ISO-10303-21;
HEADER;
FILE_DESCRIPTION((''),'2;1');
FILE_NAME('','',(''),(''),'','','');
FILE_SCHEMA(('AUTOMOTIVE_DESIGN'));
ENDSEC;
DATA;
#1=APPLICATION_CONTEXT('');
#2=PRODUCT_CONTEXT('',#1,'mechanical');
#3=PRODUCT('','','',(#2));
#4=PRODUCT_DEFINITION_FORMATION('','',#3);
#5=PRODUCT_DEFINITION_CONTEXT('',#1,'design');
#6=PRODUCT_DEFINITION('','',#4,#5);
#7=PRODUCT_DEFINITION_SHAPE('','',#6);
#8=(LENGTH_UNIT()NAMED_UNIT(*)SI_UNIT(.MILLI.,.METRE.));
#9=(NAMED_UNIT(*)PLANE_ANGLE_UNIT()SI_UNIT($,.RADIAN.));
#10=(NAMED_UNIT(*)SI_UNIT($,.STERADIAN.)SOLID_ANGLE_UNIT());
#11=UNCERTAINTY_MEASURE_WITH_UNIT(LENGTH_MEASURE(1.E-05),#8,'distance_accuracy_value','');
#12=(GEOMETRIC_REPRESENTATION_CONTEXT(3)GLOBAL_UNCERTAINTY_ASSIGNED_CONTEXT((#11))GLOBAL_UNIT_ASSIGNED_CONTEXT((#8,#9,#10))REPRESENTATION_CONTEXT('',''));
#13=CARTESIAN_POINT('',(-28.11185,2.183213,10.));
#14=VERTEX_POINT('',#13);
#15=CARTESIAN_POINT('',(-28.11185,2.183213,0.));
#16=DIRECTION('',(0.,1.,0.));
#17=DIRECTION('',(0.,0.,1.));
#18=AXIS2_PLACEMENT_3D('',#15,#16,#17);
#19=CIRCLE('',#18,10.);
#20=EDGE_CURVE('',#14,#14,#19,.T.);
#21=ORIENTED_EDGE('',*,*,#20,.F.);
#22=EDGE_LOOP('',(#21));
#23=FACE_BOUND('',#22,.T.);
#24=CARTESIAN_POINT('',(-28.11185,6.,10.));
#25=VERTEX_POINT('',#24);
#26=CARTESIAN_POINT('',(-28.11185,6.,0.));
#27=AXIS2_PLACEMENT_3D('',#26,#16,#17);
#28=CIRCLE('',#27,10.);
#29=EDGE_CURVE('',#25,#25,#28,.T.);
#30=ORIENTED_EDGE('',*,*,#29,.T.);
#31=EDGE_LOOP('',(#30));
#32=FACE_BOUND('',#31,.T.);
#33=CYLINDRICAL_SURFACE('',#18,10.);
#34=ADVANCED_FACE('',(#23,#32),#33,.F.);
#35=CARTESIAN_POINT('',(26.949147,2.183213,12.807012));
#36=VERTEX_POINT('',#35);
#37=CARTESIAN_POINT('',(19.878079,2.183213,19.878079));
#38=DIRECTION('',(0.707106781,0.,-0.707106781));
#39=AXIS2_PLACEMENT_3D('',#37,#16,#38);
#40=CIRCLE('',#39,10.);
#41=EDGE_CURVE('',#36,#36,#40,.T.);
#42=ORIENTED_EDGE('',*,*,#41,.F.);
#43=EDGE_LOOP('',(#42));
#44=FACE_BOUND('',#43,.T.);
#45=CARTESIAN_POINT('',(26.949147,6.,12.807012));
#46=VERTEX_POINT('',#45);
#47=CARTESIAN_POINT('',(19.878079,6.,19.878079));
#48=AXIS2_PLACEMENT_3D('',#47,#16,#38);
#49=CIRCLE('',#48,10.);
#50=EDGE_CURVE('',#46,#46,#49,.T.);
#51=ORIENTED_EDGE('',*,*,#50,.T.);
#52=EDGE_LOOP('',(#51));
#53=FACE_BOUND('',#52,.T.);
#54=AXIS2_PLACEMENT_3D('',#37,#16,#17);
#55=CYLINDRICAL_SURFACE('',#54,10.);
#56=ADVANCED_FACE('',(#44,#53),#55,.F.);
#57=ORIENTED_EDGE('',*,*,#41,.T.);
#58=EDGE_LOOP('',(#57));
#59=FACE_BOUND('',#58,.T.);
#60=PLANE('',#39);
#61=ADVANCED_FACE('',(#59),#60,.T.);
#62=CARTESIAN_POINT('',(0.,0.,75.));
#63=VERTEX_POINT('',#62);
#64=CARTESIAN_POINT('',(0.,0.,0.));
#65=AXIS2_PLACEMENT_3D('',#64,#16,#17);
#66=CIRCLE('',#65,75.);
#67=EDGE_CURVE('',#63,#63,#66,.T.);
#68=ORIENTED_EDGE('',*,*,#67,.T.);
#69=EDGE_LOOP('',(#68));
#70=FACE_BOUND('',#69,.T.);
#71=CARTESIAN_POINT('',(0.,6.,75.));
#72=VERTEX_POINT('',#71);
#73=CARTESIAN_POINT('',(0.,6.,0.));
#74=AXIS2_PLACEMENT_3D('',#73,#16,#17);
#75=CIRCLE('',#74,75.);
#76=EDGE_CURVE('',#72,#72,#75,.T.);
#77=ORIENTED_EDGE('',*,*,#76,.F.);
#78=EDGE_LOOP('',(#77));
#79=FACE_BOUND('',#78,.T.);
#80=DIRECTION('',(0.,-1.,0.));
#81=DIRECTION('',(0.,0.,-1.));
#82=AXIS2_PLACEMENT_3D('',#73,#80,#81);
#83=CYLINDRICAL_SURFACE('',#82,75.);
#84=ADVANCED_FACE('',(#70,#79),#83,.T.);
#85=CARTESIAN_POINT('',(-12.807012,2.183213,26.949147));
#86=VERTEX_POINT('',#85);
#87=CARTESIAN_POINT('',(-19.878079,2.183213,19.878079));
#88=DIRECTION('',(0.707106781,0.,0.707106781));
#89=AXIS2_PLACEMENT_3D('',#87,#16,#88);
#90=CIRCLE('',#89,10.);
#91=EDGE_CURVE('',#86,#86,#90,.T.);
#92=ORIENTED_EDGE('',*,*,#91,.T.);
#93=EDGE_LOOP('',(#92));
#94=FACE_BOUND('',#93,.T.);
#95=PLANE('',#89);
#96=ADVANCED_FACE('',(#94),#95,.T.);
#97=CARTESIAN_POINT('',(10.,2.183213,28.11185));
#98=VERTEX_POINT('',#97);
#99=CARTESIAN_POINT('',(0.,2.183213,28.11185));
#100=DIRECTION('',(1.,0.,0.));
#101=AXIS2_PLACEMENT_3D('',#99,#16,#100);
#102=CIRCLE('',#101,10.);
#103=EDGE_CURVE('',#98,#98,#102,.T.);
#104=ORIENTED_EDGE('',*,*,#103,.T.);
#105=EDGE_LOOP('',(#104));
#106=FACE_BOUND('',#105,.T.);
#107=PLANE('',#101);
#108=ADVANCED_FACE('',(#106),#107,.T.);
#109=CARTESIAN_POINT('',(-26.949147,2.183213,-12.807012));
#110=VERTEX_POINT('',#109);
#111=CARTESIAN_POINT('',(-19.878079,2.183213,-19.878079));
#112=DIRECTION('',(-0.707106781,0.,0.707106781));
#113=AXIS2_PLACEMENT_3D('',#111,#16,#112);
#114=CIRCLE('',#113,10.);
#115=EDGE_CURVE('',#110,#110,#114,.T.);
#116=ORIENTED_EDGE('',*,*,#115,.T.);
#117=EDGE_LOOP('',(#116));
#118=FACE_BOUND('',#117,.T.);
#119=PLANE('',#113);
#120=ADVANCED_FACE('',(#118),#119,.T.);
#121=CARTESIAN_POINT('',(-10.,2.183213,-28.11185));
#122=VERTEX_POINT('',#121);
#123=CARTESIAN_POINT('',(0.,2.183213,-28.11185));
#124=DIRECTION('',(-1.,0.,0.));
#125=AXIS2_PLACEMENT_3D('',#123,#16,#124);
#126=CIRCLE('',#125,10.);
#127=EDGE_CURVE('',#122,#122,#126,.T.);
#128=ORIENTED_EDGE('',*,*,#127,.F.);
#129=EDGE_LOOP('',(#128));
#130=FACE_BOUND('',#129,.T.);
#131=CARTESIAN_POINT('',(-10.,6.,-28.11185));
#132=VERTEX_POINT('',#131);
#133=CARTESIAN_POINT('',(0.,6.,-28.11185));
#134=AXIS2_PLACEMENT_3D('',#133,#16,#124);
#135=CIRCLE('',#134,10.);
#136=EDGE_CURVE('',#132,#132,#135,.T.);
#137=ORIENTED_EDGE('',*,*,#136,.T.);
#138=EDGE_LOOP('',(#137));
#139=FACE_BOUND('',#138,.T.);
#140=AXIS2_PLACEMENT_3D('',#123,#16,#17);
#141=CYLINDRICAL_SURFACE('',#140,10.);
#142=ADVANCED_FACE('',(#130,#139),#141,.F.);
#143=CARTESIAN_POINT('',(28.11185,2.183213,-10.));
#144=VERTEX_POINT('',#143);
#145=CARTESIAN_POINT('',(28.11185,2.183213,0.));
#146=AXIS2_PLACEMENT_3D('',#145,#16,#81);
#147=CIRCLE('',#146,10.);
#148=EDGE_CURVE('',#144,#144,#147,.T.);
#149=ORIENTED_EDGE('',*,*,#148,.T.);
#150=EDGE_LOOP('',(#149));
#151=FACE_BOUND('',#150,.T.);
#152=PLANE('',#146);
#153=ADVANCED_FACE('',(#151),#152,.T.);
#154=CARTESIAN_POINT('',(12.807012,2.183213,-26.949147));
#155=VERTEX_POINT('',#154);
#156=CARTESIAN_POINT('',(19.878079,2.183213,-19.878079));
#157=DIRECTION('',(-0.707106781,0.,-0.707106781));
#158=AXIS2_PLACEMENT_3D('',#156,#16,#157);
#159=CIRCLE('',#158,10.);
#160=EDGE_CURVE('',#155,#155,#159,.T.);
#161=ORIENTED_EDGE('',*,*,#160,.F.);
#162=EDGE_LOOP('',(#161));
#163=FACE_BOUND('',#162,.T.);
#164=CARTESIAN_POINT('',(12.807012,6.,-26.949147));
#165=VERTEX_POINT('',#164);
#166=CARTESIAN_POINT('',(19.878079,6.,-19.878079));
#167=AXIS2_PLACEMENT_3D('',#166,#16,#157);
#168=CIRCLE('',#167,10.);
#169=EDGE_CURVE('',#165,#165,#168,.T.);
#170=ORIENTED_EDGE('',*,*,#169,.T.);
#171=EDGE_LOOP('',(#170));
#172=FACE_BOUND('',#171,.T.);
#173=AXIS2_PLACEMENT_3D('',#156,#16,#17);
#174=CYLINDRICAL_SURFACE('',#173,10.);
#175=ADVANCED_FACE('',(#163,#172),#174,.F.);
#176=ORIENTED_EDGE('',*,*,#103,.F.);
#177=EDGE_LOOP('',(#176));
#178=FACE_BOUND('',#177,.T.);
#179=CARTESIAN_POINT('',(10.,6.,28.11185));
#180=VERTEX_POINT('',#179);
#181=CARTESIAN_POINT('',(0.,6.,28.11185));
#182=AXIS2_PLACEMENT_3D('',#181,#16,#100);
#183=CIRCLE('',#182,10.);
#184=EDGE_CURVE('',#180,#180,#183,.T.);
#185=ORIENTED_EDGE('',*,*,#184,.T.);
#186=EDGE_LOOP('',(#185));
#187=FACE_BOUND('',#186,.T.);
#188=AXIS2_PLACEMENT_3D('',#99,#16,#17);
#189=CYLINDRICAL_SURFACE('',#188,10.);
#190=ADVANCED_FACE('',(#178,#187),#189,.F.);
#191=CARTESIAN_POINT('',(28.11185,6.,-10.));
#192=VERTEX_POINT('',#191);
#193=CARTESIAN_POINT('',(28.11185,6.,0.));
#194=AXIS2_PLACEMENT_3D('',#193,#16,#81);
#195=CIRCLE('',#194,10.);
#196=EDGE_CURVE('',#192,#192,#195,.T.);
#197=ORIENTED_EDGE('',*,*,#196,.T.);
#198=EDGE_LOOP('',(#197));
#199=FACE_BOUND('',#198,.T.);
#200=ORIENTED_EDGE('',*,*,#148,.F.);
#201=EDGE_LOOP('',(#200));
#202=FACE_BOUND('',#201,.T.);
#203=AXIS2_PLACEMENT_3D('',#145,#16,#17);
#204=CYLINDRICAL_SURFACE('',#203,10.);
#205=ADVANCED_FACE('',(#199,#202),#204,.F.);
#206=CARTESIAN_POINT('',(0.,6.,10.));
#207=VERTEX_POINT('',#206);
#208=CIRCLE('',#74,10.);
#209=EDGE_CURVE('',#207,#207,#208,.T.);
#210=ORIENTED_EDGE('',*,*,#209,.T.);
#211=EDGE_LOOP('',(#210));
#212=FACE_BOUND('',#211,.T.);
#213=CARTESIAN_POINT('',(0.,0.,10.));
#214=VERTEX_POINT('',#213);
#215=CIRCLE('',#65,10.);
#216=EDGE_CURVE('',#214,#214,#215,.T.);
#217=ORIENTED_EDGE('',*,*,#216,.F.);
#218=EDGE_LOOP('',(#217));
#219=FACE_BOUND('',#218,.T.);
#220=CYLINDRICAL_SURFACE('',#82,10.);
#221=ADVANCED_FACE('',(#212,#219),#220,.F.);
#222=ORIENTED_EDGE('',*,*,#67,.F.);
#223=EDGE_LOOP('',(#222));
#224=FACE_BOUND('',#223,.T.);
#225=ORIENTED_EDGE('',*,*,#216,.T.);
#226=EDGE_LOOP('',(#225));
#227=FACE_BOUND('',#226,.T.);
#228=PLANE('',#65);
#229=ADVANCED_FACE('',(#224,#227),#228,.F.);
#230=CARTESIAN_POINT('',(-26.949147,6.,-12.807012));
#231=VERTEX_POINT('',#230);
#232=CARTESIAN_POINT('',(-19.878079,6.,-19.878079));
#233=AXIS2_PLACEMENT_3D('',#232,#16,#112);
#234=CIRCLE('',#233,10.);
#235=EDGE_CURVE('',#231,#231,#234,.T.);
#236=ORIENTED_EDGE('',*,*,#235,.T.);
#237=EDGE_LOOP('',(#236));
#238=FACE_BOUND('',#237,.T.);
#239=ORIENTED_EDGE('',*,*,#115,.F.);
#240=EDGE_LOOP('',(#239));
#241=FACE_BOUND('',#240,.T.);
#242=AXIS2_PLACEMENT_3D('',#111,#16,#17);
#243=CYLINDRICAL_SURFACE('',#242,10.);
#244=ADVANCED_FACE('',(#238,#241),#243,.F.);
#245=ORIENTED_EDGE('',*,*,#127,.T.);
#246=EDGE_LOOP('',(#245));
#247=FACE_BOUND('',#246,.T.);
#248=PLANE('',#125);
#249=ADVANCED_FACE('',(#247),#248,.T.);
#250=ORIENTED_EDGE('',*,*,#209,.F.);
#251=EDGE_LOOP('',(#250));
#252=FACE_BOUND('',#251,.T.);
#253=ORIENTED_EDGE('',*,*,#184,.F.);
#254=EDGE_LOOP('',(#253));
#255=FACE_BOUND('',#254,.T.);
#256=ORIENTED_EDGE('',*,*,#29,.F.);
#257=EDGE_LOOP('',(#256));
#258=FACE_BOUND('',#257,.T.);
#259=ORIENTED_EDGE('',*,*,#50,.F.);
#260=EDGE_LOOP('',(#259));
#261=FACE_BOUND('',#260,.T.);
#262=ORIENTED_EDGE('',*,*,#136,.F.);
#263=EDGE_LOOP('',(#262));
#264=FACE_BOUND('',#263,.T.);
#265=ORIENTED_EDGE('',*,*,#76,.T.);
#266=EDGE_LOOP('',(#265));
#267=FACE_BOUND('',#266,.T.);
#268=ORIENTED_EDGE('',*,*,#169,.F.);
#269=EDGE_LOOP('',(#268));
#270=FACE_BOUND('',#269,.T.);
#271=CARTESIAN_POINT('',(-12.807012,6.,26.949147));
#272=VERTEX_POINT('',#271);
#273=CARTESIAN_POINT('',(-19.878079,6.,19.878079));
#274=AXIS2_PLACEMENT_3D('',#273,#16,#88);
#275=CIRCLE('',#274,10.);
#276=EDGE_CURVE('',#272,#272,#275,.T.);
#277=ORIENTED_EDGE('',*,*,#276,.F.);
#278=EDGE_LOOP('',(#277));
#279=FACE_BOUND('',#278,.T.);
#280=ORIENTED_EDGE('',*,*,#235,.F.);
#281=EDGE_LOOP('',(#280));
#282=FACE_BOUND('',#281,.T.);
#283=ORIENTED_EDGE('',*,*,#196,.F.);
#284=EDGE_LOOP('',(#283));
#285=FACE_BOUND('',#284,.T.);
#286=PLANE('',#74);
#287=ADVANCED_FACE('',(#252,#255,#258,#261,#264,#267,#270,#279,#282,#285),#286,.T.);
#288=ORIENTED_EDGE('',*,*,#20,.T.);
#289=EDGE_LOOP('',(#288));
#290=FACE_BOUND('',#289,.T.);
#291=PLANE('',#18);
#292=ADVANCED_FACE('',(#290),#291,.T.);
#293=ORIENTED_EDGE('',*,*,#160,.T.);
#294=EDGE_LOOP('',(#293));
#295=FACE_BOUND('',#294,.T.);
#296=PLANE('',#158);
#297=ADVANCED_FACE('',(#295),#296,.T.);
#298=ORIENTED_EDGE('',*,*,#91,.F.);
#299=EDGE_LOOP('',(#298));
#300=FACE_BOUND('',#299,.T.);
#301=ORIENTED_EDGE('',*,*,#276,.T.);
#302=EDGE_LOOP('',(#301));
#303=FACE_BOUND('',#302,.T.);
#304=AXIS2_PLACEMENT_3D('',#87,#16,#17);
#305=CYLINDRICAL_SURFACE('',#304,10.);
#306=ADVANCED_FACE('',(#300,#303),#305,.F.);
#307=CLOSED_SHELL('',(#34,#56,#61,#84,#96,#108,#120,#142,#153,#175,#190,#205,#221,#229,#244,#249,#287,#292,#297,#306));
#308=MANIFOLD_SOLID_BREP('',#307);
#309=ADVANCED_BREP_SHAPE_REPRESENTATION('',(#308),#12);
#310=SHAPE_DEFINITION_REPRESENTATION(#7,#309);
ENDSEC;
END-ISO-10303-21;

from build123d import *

# Parameters (mm, degrees)
SKETCH1_R           = 75
BOSS_EXTRUDE1_DEPTH = 6
SKETCH2_R           = 10
CUT_EXTRUDE1_DEPTH  = 107.235587258
SKETCH3_R           = 10
CUT_EXTRUDE2_DEPTH  = 3.816787424
CIRPATTERN1_COUNT   = 8


with BuildPart() as part:
    # Sketch1 → Boss-Extrude1 (new body)
    with BuildSketch(Plane(origin=(0, 0, 0), x_dir=(1, 0, 0), z_dir=(0, 1, 0))):
        Circle(SKETCH1_R)
    extrude(amount=BOSS_EXTRUDE1_DEPTH)

    # Sketch2 → Cut-Extrude1 (cut, through all)
    with BuildSketch(Plane(origin=(0, 0, 0), x_dir=(1, 0, 0), z_dir=(0, 1, 0))):
        Circle(SKETCH2_R)
    extrude(amount=CUT_EXTRUDE1_DEPTH, mode=Mode.SUBTRACT)

    # Sketch3 → Cut-Extrude2 (cut)
    with BuildSketch(Plane(origin=(0, 6, 0), x_dir=(1, 0, 0), z_dir=(0, 1, 0))):
        with Locations((-28.111849566, 0)):
            Circle(SKETCH3_R)
    cut_extrude2 = extrude(amount=-CUT_EXTRUDE2_DEPTH, mode=Mode.SUBTRACT)

    # CirPattern1: Cut-Extrude2 ×8 about axis
    cirpattern1_axis = Axis((0, 0, 0), (0, 1, 0))
    for i in range(1, CIRPATTERN1_COUNT):
        add(cut_extrude2.rotate(cirpattern1_axis, i * 360 / CIRPATTERN1_COUNT), mode=Mode.SUBTRACT)


solid = part.part
